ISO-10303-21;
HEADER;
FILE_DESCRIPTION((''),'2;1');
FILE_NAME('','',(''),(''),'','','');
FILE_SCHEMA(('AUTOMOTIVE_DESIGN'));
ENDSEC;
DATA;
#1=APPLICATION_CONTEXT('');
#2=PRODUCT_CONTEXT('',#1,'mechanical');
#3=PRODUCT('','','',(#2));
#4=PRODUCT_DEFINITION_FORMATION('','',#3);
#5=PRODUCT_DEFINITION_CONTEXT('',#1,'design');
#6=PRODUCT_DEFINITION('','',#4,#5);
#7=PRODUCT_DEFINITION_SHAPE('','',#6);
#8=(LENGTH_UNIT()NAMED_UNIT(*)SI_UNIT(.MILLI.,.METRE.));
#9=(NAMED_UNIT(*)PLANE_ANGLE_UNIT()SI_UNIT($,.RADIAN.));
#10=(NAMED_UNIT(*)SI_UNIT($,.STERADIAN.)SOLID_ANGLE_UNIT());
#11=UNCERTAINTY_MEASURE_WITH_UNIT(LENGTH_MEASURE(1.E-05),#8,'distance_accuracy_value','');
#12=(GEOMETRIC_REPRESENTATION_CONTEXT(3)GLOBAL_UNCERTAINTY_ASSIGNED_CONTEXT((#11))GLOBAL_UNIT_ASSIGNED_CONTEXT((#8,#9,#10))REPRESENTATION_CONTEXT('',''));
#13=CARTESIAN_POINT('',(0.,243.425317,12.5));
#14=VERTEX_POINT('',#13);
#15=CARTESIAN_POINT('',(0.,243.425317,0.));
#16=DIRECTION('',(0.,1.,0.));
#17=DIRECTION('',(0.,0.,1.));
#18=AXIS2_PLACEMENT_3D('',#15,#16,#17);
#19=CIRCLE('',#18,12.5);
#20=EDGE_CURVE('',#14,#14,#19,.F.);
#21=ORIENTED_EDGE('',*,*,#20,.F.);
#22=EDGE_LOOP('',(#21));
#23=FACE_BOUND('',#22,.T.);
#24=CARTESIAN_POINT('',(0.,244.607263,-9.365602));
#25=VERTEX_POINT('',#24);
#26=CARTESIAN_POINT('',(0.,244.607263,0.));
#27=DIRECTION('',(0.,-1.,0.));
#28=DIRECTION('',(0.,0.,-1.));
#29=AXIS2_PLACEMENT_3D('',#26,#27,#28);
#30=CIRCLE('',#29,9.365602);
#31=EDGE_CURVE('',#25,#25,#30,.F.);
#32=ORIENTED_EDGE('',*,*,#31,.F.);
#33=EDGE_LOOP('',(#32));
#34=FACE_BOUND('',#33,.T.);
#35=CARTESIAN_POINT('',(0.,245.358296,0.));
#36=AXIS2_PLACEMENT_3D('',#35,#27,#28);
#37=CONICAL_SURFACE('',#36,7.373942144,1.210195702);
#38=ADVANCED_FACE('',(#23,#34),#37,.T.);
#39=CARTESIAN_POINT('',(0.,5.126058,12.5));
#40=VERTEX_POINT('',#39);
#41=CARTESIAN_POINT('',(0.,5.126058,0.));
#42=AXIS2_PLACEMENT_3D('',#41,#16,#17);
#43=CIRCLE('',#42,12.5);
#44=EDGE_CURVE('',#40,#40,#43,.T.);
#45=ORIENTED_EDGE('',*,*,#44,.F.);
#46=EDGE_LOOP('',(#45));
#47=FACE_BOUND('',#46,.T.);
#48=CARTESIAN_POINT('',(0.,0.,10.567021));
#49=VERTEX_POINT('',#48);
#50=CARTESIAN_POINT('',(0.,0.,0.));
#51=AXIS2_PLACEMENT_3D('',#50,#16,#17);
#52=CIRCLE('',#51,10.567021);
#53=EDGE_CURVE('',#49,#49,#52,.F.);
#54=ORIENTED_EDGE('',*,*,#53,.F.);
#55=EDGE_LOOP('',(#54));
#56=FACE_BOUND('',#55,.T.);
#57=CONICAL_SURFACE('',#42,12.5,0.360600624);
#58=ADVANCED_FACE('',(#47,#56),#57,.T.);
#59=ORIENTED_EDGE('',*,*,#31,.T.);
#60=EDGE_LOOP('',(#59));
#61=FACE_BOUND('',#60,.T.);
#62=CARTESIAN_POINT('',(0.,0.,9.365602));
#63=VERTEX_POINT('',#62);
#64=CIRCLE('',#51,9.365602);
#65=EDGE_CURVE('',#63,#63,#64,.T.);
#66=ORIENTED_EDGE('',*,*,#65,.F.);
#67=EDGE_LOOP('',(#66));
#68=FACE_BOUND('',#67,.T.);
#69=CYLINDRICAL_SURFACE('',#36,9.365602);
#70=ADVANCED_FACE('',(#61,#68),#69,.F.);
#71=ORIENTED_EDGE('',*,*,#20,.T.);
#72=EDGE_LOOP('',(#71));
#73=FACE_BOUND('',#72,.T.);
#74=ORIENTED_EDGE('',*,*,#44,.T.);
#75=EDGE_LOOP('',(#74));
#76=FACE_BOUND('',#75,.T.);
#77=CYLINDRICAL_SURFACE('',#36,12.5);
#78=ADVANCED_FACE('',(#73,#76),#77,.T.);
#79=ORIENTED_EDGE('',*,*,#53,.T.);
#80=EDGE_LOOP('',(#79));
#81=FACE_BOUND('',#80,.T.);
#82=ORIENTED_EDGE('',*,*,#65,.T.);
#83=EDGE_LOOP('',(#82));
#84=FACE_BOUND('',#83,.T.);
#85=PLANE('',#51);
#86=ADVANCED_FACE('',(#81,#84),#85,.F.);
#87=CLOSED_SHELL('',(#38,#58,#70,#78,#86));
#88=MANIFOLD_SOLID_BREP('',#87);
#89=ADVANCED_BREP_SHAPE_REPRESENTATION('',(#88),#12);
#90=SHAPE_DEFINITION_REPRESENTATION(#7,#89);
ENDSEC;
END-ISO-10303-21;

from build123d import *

# Parameters (mm, degrees)
SKETCH1_R           = 12.5
BOSS_EXTRUDE1_DEPTH = 245.358296
SKETCH2_R           = 9.365602206
CUT_EXTRUDE1_DEPTH  = 246.994295495
CHAMFER1_SIZE       = 1.932979
CHAMFER1_SIZE_2     = 5.126058


with BuildPart() as part:
    # Sketch1 → Boss-Extrude1 (new body)
    with BuildSketch(Plane(origin=(0, 0, 0), x_dir=(1, 0, 0), z_dir=(0, 1, 0))):
        with Locations(Location((0, 0, 0), (0, 0, 270))):
            Circle(SKETCH1_R)
    extrude(amount=BOSS_EXTRUDE1_DEPTH)

    # Sketch2 → Cut-Extrude1 (cut, through all)
    with BuildSketch(Plane(origin=(0, 0, 0), x_dir=(1, 0, 0), z_dir=(0, 1, 0))):
        with Locations(Location((0, 0, 0), (0, 0, 270))):
            Circle(SKETCH2_R)
    extrude(amount=CUT_EXTRUDE1_DEPTH, mode=Mode.SUBTRACT)

    # Chamfer1
    # the kernel refuses this chamfer: 5.126058, 1.932979 mm, written as the material it takes off along each edge
    with BuildSketch(Plane(origin=(0, 245.358296, 0), x_dir=(0, 0, 1), z_dir=(-1, 0, 0))) as chamfer1_piece_1:
        Polygon((12.5, -CHAMFER1_SIZE), (12.5 - CHAMFER1_SIZE_2, 0), (12.5, 0), align=None)
    revolve(axis=Axis((0, 245.358296, 0), (0, 1, 0)), mode=Mode.SUBTRACT)
    with BuildSketch(Plane(origin=(0, 0, 0), x_dir=(0, 0, 1), z_dir=(-1, 0, 0))) as chamfer1_piece_2:
        Polygon((12.5, CHAMFER1_SIZE_2), (12.5 - CHAMFER1_SIZE, 0), (12.5, 0), align=None)
    revolve(axis=Axis((0, 0, 0), (0, 1, 0)), mode=Mode.SUBTRACT)


solid = part.part
